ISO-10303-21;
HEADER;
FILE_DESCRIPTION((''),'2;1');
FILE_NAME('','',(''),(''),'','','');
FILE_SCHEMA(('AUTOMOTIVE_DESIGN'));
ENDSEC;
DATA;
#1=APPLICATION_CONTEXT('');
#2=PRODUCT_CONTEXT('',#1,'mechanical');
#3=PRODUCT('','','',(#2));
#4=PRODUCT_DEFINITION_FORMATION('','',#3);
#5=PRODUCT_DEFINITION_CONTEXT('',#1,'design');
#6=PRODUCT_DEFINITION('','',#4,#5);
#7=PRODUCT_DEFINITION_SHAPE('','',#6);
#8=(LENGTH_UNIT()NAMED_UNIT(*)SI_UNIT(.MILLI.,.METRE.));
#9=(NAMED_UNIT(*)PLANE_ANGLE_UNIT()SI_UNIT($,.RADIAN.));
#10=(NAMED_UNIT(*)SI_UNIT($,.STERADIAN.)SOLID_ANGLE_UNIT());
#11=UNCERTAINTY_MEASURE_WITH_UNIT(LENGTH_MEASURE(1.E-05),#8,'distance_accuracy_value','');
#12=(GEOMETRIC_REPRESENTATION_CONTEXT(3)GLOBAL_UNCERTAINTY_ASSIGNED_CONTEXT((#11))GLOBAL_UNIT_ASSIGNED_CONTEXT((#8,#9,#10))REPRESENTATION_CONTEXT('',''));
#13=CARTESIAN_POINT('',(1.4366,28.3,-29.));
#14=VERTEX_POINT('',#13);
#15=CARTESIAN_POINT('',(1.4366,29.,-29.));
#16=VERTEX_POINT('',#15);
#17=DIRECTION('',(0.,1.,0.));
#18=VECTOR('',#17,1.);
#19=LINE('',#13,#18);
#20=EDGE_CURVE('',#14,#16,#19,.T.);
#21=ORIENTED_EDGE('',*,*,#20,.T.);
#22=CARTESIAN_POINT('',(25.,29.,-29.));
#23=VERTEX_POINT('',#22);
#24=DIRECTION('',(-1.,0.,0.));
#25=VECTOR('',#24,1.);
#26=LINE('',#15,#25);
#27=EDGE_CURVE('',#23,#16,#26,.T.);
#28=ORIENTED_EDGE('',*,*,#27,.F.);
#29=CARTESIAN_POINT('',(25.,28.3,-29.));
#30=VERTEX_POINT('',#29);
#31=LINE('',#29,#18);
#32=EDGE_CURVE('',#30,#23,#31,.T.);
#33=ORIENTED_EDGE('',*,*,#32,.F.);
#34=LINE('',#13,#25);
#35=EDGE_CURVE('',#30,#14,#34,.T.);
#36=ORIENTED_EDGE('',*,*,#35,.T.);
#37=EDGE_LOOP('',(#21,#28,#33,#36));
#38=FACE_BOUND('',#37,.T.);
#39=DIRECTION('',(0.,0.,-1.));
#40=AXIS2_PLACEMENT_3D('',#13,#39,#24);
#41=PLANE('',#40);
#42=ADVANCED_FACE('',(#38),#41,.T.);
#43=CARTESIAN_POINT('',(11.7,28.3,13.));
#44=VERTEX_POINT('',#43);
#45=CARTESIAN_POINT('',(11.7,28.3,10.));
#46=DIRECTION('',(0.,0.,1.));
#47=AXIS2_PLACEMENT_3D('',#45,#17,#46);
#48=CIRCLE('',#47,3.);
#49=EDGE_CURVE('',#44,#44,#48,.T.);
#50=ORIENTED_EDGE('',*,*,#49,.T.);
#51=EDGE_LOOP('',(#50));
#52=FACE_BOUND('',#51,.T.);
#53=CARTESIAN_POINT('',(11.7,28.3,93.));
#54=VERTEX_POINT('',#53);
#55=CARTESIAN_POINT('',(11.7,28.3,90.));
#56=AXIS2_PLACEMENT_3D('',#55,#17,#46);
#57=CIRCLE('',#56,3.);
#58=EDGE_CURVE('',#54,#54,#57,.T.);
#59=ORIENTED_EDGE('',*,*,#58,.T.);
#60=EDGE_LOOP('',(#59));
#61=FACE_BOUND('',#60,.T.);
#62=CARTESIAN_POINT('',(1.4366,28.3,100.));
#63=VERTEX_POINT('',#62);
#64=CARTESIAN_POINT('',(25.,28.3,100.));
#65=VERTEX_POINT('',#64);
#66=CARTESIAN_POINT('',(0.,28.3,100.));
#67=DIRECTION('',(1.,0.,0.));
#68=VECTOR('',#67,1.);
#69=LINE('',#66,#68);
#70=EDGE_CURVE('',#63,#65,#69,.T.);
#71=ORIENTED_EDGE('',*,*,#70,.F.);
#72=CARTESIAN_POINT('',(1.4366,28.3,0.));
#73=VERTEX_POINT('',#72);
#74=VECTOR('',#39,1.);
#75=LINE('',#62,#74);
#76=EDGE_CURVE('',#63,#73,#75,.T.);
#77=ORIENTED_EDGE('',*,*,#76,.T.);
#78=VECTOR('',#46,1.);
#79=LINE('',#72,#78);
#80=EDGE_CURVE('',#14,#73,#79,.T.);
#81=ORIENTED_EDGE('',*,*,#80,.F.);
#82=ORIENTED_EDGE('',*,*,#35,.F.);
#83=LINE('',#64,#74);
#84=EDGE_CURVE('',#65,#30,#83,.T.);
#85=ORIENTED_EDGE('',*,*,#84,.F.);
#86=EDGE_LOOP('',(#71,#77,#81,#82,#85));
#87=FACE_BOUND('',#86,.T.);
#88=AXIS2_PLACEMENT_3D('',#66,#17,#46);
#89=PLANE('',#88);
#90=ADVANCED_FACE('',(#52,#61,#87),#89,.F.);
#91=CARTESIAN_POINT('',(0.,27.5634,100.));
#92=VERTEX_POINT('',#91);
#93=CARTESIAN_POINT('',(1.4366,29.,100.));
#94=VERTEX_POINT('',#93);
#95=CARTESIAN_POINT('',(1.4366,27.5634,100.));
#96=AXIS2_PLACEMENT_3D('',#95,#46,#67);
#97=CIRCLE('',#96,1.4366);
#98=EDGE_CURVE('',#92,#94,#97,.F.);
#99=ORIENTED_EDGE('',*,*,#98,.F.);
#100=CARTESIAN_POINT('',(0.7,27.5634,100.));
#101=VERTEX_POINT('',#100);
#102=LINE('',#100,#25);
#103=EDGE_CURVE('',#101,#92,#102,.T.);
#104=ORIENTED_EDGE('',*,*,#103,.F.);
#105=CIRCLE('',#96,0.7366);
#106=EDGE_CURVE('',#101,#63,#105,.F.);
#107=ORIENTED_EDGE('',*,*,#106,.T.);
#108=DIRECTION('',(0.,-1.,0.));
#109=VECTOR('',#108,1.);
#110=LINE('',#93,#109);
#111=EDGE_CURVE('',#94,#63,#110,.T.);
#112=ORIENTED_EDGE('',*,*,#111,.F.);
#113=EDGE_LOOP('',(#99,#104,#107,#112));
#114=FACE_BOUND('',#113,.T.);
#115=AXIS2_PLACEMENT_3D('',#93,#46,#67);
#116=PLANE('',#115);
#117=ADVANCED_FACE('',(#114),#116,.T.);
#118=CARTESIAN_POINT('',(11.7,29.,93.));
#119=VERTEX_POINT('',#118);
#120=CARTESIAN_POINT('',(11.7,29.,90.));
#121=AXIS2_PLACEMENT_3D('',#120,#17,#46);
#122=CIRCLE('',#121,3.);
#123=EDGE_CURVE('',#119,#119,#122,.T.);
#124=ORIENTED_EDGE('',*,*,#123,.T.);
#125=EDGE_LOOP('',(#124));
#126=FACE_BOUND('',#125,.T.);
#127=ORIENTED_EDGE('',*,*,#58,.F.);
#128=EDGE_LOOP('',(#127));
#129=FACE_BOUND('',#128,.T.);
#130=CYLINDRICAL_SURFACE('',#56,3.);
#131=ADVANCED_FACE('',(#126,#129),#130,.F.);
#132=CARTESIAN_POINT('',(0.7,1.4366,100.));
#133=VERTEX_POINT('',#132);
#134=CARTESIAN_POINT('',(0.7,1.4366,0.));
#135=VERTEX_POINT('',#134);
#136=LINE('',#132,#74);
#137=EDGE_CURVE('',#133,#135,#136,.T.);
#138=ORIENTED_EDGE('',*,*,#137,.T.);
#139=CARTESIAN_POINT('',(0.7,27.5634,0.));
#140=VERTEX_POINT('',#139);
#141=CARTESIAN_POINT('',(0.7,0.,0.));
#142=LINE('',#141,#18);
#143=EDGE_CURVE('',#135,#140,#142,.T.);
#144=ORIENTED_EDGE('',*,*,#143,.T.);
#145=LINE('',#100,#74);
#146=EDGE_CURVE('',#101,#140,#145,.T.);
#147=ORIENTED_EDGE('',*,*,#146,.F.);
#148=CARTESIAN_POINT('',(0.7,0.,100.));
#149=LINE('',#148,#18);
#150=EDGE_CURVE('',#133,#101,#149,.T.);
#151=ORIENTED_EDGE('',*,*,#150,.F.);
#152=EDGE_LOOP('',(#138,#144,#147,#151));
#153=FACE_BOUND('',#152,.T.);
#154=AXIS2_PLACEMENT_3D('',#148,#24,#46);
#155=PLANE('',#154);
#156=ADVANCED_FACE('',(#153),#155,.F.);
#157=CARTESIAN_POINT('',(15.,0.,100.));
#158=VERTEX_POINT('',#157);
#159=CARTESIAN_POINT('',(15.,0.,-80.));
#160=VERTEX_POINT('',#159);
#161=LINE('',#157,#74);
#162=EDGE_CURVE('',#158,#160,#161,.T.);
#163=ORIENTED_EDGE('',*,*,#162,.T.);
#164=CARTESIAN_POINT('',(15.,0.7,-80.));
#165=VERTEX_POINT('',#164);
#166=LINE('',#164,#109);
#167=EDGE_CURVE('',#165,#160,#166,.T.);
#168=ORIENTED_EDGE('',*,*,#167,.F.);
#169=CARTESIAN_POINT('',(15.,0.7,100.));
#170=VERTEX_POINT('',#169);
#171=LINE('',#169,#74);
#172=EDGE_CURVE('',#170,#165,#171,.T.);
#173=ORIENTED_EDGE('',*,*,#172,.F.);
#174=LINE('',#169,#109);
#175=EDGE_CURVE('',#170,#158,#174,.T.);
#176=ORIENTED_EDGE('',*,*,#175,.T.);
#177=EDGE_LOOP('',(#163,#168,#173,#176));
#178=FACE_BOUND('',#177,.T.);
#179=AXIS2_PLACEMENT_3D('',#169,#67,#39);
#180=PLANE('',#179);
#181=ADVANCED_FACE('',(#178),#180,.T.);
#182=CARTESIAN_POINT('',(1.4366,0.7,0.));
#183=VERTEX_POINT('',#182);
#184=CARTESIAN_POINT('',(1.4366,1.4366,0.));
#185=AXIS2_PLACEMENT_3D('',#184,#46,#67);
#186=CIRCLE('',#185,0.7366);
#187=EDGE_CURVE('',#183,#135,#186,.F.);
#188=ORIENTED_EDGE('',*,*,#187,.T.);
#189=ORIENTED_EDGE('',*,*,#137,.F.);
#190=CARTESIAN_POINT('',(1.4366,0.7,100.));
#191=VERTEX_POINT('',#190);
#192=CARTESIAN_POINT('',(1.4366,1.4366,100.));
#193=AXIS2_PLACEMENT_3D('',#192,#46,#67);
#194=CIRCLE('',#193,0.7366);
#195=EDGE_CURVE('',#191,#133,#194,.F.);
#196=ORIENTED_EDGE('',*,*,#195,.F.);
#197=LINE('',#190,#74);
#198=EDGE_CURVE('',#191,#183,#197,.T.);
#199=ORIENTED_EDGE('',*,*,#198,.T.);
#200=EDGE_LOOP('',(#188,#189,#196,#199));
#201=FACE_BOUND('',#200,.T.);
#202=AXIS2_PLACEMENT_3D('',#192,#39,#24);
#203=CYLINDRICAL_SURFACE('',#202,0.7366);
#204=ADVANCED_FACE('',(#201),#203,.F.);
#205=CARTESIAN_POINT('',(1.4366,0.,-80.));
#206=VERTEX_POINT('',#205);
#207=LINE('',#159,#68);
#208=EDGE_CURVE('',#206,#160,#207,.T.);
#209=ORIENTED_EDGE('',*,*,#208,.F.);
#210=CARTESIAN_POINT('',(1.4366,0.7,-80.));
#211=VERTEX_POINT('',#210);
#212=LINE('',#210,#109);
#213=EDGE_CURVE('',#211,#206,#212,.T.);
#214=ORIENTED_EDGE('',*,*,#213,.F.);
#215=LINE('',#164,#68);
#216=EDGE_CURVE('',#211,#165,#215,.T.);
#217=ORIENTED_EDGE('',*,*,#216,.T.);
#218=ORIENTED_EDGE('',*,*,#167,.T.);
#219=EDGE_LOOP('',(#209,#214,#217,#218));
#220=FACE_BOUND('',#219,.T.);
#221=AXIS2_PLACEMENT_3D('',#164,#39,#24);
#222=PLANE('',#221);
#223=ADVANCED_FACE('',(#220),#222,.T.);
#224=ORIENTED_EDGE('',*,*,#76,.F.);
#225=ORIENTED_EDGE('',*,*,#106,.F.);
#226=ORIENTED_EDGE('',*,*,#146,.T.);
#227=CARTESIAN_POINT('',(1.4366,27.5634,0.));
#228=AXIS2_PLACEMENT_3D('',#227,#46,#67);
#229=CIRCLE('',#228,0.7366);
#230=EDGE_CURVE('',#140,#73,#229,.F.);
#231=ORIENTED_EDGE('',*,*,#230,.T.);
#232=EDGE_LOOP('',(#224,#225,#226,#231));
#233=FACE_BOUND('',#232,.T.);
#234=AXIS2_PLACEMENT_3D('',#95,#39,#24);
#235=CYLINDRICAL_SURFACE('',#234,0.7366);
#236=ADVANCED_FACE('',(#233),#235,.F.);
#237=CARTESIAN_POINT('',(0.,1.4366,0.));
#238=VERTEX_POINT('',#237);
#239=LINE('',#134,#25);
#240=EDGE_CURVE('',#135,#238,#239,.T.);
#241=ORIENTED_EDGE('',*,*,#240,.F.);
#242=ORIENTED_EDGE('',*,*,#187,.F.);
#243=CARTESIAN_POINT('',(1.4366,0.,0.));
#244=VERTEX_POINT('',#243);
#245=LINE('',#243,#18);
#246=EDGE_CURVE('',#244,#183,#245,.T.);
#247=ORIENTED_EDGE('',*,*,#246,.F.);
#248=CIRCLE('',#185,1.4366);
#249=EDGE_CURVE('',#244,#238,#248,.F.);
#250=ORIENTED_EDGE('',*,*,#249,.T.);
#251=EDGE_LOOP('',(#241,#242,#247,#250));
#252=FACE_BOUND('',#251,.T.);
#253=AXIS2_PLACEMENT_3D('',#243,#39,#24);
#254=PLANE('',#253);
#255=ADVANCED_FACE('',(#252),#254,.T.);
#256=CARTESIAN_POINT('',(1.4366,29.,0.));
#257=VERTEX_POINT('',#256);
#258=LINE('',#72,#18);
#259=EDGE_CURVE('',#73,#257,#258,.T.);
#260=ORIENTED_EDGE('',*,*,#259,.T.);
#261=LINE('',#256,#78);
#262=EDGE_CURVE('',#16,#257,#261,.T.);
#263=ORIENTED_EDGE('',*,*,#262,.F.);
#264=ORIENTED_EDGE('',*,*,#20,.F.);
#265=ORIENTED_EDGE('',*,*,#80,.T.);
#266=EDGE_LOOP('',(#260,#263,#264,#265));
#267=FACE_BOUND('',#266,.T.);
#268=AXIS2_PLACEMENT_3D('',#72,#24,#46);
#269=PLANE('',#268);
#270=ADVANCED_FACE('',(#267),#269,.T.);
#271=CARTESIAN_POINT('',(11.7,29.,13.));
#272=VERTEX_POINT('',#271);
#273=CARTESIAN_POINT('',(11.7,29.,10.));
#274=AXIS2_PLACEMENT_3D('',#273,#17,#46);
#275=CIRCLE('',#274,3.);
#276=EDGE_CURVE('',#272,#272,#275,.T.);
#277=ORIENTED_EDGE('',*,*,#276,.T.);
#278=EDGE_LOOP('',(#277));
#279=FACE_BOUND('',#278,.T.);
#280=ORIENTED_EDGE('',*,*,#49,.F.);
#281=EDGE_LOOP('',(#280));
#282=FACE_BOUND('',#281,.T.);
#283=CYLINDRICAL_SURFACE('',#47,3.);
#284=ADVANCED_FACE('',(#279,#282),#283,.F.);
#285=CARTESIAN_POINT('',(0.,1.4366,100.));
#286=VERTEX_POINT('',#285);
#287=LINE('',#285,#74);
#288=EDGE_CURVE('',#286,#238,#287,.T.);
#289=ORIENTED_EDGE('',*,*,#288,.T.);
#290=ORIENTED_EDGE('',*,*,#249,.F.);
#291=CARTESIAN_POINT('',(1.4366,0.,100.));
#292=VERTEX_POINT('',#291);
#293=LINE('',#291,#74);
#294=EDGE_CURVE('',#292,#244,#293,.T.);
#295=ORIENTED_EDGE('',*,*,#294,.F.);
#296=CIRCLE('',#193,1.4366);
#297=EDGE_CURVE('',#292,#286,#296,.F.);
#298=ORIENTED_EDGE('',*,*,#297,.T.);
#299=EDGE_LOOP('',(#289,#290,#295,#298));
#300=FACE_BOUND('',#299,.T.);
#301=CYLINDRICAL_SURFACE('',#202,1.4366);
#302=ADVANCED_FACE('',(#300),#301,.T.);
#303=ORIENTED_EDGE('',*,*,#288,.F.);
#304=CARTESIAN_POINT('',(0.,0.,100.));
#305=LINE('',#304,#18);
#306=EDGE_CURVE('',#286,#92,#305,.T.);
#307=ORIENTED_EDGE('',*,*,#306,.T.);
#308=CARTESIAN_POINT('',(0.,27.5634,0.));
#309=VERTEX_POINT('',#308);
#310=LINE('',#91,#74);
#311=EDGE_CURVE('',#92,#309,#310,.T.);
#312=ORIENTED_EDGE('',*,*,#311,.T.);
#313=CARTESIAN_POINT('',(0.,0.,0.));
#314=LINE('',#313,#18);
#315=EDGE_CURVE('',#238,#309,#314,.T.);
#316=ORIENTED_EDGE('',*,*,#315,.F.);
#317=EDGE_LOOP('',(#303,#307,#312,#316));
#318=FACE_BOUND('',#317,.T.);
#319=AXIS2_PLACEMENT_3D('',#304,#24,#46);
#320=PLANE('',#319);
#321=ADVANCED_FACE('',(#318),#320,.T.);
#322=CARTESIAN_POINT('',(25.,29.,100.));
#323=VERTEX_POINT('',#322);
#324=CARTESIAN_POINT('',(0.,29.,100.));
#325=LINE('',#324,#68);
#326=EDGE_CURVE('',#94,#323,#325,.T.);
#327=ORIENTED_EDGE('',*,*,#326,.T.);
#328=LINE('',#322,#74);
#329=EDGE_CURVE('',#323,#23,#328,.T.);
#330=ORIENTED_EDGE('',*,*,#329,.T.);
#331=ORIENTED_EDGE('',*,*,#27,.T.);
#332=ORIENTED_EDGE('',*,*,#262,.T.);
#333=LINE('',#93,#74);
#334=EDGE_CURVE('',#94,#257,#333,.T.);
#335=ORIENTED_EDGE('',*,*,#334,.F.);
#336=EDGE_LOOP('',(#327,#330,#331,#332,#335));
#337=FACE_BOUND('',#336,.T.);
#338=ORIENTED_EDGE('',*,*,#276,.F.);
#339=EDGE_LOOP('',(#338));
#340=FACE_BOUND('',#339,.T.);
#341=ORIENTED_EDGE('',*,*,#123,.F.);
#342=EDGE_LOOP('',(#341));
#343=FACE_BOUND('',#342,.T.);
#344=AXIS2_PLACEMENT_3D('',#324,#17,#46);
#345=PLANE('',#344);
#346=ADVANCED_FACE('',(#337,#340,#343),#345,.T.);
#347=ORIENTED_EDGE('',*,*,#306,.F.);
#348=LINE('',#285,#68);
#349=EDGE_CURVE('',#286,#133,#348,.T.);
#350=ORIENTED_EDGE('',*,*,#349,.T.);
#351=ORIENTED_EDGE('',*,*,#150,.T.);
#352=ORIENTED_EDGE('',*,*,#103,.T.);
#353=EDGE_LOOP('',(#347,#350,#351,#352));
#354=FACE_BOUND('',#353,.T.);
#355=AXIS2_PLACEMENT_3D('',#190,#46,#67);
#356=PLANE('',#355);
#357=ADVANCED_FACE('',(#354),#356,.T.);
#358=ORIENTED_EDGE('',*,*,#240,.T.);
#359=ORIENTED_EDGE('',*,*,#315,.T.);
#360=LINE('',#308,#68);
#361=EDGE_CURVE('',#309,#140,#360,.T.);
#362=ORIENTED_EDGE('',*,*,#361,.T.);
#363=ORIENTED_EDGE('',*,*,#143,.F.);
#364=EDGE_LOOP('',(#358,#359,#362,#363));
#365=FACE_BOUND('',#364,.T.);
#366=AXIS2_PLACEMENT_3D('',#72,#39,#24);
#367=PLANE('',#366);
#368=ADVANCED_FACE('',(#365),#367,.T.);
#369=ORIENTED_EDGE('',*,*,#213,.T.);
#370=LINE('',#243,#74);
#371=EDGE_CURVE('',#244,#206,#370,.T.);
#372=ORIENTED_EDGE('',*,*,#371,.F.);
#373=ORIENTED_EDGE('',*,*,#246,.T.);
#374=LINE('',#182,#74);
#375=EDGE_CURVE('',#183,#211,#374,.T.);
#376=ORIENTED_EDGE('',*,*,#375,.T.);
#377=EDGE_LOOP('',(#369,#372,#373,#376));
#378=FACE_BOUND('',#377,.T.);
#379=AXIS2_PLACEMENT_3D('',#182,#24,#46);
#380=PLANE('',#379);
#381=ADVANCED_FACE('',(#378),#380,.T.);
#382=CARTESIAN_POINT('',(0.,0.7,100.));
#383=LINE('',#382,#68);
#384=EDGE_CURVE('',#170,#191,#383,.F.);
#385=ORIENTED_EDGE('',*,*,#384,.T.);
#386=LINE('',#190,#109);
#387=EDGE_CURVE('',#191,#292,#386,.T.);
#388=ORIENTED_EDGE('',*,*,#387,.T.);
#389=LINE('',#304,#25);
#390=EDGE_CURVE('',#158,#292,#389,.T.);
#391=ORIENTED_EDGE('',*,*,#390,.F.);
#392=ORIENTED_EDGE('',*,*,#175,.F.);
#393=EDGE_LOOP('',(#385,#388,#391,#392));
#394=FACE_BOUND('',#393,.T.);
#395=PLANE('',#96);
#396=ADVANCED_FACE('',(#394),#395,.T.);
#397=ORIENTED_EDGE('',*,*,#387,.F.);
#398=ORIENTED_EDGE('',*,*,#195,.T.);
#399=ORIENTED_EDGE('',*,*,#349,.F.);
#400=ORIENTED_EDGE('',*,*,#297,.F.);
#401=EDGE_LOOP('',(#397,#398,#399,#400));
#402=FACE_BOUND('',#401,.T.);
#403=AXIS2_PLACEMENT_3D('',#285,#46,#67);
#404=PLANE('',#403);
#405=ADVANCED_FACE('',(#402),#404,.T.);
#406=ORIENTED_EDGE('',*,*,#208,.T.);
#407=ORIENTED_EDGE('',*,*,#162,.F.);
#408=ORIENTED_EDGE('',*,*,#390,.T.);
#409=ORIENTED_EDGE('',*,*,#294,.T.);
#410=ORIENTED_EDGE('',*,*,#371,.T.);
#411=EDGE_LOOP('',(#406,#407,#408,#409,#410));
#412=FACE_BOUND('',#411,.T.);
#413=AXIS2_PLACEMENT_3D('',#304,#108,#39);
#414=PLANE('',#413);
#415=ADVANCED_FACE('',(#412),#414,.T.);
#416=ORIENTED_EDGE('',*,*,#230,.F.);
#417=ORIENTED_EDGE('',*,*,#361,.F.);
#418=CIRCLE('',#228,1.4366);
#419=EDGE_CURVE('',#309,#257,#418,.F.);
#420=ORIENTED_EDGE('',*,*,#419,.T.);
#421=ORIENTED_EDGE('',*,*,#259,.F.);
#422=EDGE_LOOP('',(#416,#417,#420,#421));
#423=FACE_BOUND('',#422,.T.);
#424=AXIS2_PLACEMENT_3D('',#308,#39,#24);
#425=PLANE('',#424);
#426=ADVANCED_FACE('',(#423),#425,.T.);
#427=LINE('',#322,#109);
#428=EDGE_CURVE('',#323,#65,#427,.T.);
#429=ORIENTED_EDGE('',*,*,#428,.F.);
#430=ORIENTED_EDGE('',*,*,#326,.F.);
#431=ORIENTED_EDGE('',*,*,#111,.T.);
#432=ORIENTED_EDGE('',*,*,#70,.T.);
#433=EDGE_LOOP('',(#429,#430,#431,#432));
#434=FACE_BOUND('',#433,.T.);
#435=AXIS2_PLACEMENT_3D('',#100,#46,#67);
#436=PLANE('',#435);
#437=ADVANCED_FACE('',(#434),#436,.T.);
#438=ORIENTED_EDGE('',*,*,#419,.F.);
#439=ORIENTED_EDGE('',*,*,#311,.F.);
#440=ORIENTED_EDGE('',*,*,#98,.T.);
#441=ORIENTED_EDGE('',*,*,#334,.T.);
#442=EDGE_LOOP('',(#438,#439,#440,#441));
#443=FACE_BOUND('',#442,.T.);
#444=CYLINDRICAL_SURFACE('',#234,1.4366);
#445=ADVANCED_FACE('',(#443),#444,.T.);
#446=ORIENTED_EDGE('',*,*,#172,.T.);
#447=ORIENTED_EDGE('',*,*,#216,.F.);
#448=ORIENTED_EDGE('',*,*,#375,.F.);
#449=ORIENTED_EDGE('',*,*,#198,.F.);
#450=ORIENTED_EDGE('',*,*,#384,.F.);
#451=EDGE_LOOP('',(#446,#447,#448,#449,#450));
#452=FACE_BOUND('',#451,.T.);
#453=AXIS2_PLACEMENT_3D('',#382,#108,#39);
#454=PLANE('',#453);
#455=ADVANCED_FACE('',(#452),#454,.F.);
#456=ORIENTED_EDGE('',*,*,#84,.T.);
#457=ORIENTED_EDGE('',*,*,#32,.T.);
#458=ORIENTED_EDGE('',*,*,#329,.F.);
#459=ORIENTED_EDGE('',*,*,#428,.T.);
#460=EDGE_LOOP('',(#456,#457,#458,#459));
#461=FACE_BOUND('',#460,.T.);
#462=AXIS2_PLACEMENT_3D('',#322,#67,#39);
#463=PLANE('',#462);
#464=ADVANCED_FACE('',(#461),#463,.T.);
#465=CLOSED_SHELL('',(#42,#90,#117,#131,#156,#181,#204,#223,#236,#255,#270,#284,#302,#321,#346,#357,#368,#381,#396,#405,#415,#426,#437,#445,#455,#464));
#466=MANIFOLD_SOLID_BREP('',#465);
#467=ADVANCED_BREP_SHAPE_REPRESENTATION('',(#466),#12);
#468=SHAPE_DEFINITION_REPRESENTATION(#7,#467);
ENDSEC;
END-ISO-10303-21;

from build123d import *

# Parameters (mm, degrees)
SM_BASE_FLANGE_1_DEPTH = 100
SKETCH_6_W             = 23.5634
SKETCH_6_H             = 29
EXTRUDE_1_DEPTH        = 0.7
SKETCH_8_W             = 13.5634
SKETCH_8_H             = 80
EXTRUDE_3_DEPTH        = 0.7
SKETCH_9_R             = 3
CUT_EXTRUDE_1_DEPTH    = 0.7


# Sheet-metal steps are written as plain solids
with BuildPart() as part:
    # Sketch 1 → 基体-法兰1 (new body)
    with BuildSketch(Plane.XY):
        with BuildLine():
            Line((25, 29), (1.4366, 29))
            ThreePointArc((1.4366, 29), (0.420770398, 28.579229602), (0, 27.5634))
            Line((0, 27.5634), (0, 1.4366))
            ThreePointArc((0, 1.4366), (0.420770398, 0.420770398), (1.4366, 0))
            Line((1.4366, 0), (15, 0))
            Line((15, 0), (15, 0.7))
            Line((15, 0.7), (1.4366, 0.7))
            ThreePointArc((1.4366, 0.7), (0.915745145, 0.915745145), (0.7, 1.4366))
            Line((0.7, 1.4366), (0.7, 27.5634))
            ThreePointArc((0.7, 27.5634), (0.915745145, 28.084254855), (1.4366, 28.3))
            Line((1.4366, 28.3), (25, 28.3))
            Line((25, 28.3), (25, 29))
        make_face()
    extrude(amount=SM_BASE_FLANGE_1_DEPTH)

    # 草图6 → 凸台-拉伸1 (add)
    with BuildSketch(Plane(origin=(0, 29, 0), x_dir=(1, 0, 0), z_dir=(0, 1, 0))):
        with Locations((13.2183, 14.5)):
            Rectangle(SKETCH_6_W, SKETCH_6_H)
    extrude(amount=-EXTRUDE_1_DEPTH)

    # 草图8 → 凸台-拉伸3 (add)
    with BuildSketch(Plane.XZ):
        with Locations((8.2183, -40)):
            Rectangle(SKETCH_8_W, SKETCH_8_H)
    extrude(amount=-EXTRUDE_3_DEPTH)

    # 草图9 → 切除-拉伸1 (cut)
    with BuildSketch(Plane(origin=(0, 29, 0), x_dir=(1, 0, 0), z_dir=(0, 1, 0))):
        with Locations(Location((11.7, -90, 0), (0, 0, 270))):
            Circle(SKETCH_9_R)
        with Locations(Location((11.7, -10, 0), (0, 0, 270))):
            Circle(SKETCH_9_R)
    extrude(amount=-CUT_EXTRUDE_1_DEPTH, mode=Mode.SUBTRACT)


solid = part.part
